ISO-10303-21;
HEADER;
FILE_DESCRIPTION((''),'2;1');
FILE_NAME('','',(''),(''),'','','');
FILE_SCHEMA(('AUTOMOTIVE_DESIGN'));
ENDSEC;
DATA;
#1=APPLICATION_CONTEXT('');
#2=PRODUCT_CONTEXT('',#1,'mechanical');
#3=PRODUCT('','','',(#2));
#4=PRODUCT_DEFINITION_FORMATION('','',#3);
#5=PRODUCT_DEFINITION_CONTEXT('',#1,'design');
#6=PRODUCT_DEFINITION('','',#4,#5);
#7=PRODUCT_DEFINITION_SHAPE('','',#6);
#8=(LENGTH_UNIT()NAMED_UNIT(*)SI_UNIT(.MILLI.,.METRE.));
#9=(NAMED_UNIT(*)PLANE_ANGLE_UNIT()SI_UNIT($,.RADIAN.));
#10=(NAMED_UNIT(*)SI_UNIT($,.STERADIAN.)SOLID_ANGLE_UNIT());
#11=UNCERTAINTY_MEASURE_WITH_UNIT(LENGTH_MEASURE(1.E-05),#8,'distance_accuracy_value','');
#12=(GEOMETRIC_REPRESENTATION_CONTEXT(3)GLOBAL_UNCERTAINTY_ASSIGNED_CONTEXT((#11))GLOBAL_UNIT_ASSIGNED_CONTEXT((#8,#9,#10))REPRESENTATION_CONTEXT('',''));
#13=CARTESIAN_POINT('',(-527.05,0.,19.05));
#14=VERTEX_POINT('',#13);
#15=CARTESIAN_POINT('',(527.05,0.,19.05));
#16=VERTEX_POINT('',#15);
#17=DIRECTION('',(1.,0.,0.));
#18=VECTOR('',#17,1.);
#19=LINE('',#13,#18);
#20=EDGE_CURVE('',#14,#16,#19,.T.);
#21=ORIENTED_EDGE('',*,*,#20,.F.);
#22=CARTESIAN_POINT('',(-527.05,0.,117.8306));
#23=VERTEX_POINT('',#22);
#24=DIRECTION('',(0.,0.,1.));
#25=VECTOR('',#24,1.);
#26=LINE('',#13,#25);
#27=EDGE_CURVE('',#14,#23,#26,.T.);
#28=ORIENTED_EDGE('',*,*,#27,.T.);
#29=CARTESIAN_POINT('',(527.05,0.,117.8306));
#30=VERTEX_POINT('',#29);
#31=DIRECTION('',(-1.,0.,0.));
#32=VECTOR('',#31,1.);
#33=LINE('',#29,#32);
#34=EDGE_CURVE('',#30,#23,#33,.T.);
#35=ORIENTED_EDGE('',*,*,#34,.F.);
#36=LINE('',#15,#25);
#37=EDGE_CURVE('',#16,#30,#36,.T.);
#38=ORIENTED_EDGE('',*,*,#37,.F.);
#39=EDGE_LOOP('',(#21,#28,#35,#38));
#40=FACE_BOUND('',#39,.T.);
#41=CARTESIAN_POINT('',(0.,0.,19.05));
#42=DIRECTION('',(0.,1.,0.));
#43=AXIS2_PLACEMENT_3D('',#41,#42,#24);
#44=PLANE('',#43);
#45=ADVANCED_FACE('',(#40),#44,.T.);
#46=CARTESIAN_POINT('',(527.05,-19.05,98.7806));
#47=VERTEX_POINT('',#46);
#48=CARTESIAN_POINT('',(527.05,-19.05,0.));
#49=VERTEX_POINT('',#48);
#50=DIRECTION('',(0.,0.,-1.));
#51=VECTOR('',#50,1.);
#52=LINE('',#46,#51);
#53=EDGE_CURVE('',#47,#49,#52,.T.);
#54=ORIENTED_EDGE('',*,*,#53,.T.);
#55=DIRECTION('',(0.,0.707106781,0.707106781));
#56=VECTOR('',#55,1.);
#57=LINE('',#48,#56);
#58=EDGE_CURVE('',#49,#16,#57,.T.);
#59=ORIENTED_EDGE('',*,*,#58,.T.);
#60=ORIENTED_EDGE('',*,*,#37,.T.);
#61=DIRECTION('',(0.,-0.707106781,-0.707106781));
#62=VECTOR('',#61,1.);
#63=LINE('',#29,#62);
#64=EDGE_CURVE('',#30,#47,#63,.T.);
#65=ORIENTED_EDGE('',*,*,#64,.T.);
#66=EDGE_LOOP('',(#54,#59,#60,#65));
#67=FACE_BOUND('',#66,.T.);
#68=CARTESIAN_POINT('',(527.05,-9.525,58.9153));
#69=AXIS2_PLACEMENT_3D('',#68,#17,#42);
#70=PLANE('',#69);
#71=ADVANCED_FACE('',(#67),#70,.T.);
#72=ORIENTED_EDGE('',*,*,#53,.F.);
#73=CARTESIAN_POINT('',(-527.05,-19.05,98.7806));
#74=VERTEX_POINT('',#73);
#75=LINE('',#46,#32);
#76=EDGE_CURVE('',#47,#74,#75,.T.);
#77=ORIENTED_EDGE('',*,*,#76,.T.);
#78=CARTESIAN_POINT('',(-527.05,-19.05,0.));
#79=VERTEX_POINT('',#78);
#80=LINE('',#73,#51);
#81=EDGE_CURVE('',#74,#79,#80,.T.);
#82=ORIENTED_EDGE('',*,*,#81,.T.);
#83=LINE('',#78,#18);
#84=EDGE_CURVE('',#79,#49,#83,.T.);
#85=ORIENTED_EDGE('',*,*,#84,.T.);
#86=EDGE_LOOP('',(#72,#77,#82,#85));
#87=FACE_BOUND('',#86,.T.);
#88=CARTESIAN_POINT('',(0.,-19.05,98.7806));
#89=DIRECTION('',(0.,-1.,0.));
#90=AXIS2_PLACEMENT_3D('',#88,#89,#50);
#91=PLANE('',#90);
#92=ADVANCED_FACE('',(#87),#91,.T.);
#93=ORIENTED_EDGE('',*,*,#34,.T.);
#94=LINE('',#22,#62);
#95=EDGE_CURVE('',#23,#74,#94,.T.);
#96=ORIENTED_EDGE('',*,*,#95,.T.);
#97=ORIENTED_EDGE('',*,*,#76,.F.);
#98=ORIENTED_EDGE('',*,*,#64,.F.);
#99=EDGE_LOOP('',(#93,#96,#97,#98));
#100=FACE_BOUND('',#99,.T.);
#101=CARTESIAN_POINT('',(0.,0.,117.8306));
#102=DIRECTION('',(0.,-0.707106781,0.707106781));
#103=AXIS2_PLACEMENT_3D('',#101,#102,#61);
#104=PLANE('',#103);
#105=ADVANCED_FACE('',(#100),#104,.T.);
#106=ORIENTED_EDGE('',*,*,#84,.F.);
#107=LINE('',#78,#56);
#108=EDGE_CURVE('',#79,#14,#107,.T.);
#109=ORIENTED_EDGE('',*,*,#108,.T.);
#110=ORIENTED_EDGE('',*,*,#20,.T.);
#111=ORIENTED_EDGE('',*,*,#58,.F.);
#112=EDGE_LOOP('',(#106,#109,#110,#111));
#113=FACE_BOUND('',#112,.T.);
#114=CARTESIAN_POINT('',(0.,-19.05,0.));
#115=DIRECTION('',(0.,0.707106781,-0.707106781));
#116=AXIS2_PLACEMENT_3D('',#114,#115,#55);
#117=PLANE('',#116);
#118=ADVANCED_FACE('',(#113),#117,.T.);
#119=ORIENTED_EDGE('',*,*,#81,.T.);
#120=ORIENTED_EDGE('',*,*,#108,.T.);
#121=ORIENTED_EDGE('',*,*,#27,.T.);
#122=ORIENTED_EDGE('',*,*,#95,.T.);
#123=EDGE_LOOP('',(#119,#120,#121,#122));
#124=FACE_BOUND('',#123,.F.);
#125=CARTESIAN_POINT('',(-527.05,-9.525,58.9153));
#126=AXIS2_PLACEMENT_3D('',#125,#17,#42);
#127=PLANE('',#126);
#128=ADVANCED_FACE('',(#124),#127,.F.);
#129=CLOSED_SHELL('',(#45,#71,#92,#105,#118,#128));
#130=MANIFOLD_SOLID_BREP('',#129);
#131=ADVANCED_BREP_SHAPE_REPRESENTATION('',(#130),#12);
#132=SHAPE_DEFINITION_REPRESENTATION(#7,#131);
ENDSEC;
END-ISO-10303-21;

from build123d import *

# Parameters (mm, degrees)
F1_DEPTH = 527.05


# Not quite as in the source:
# - a feature of the source that left no trace in its solid (it failed there, or was rolled back) is left out


with BuildPart() as f1:
    # F0 (on Right) → F1 (new body, symmetric)
    with BuildSketch(Plane.YZ):
        Polygon((-19.05, 98.7806), (-19.05, 0), (0, 19.05), (0, 117.8306), align=None)
    extrude(amount=F1_DEPTH, both=True)


solid = f1.part
